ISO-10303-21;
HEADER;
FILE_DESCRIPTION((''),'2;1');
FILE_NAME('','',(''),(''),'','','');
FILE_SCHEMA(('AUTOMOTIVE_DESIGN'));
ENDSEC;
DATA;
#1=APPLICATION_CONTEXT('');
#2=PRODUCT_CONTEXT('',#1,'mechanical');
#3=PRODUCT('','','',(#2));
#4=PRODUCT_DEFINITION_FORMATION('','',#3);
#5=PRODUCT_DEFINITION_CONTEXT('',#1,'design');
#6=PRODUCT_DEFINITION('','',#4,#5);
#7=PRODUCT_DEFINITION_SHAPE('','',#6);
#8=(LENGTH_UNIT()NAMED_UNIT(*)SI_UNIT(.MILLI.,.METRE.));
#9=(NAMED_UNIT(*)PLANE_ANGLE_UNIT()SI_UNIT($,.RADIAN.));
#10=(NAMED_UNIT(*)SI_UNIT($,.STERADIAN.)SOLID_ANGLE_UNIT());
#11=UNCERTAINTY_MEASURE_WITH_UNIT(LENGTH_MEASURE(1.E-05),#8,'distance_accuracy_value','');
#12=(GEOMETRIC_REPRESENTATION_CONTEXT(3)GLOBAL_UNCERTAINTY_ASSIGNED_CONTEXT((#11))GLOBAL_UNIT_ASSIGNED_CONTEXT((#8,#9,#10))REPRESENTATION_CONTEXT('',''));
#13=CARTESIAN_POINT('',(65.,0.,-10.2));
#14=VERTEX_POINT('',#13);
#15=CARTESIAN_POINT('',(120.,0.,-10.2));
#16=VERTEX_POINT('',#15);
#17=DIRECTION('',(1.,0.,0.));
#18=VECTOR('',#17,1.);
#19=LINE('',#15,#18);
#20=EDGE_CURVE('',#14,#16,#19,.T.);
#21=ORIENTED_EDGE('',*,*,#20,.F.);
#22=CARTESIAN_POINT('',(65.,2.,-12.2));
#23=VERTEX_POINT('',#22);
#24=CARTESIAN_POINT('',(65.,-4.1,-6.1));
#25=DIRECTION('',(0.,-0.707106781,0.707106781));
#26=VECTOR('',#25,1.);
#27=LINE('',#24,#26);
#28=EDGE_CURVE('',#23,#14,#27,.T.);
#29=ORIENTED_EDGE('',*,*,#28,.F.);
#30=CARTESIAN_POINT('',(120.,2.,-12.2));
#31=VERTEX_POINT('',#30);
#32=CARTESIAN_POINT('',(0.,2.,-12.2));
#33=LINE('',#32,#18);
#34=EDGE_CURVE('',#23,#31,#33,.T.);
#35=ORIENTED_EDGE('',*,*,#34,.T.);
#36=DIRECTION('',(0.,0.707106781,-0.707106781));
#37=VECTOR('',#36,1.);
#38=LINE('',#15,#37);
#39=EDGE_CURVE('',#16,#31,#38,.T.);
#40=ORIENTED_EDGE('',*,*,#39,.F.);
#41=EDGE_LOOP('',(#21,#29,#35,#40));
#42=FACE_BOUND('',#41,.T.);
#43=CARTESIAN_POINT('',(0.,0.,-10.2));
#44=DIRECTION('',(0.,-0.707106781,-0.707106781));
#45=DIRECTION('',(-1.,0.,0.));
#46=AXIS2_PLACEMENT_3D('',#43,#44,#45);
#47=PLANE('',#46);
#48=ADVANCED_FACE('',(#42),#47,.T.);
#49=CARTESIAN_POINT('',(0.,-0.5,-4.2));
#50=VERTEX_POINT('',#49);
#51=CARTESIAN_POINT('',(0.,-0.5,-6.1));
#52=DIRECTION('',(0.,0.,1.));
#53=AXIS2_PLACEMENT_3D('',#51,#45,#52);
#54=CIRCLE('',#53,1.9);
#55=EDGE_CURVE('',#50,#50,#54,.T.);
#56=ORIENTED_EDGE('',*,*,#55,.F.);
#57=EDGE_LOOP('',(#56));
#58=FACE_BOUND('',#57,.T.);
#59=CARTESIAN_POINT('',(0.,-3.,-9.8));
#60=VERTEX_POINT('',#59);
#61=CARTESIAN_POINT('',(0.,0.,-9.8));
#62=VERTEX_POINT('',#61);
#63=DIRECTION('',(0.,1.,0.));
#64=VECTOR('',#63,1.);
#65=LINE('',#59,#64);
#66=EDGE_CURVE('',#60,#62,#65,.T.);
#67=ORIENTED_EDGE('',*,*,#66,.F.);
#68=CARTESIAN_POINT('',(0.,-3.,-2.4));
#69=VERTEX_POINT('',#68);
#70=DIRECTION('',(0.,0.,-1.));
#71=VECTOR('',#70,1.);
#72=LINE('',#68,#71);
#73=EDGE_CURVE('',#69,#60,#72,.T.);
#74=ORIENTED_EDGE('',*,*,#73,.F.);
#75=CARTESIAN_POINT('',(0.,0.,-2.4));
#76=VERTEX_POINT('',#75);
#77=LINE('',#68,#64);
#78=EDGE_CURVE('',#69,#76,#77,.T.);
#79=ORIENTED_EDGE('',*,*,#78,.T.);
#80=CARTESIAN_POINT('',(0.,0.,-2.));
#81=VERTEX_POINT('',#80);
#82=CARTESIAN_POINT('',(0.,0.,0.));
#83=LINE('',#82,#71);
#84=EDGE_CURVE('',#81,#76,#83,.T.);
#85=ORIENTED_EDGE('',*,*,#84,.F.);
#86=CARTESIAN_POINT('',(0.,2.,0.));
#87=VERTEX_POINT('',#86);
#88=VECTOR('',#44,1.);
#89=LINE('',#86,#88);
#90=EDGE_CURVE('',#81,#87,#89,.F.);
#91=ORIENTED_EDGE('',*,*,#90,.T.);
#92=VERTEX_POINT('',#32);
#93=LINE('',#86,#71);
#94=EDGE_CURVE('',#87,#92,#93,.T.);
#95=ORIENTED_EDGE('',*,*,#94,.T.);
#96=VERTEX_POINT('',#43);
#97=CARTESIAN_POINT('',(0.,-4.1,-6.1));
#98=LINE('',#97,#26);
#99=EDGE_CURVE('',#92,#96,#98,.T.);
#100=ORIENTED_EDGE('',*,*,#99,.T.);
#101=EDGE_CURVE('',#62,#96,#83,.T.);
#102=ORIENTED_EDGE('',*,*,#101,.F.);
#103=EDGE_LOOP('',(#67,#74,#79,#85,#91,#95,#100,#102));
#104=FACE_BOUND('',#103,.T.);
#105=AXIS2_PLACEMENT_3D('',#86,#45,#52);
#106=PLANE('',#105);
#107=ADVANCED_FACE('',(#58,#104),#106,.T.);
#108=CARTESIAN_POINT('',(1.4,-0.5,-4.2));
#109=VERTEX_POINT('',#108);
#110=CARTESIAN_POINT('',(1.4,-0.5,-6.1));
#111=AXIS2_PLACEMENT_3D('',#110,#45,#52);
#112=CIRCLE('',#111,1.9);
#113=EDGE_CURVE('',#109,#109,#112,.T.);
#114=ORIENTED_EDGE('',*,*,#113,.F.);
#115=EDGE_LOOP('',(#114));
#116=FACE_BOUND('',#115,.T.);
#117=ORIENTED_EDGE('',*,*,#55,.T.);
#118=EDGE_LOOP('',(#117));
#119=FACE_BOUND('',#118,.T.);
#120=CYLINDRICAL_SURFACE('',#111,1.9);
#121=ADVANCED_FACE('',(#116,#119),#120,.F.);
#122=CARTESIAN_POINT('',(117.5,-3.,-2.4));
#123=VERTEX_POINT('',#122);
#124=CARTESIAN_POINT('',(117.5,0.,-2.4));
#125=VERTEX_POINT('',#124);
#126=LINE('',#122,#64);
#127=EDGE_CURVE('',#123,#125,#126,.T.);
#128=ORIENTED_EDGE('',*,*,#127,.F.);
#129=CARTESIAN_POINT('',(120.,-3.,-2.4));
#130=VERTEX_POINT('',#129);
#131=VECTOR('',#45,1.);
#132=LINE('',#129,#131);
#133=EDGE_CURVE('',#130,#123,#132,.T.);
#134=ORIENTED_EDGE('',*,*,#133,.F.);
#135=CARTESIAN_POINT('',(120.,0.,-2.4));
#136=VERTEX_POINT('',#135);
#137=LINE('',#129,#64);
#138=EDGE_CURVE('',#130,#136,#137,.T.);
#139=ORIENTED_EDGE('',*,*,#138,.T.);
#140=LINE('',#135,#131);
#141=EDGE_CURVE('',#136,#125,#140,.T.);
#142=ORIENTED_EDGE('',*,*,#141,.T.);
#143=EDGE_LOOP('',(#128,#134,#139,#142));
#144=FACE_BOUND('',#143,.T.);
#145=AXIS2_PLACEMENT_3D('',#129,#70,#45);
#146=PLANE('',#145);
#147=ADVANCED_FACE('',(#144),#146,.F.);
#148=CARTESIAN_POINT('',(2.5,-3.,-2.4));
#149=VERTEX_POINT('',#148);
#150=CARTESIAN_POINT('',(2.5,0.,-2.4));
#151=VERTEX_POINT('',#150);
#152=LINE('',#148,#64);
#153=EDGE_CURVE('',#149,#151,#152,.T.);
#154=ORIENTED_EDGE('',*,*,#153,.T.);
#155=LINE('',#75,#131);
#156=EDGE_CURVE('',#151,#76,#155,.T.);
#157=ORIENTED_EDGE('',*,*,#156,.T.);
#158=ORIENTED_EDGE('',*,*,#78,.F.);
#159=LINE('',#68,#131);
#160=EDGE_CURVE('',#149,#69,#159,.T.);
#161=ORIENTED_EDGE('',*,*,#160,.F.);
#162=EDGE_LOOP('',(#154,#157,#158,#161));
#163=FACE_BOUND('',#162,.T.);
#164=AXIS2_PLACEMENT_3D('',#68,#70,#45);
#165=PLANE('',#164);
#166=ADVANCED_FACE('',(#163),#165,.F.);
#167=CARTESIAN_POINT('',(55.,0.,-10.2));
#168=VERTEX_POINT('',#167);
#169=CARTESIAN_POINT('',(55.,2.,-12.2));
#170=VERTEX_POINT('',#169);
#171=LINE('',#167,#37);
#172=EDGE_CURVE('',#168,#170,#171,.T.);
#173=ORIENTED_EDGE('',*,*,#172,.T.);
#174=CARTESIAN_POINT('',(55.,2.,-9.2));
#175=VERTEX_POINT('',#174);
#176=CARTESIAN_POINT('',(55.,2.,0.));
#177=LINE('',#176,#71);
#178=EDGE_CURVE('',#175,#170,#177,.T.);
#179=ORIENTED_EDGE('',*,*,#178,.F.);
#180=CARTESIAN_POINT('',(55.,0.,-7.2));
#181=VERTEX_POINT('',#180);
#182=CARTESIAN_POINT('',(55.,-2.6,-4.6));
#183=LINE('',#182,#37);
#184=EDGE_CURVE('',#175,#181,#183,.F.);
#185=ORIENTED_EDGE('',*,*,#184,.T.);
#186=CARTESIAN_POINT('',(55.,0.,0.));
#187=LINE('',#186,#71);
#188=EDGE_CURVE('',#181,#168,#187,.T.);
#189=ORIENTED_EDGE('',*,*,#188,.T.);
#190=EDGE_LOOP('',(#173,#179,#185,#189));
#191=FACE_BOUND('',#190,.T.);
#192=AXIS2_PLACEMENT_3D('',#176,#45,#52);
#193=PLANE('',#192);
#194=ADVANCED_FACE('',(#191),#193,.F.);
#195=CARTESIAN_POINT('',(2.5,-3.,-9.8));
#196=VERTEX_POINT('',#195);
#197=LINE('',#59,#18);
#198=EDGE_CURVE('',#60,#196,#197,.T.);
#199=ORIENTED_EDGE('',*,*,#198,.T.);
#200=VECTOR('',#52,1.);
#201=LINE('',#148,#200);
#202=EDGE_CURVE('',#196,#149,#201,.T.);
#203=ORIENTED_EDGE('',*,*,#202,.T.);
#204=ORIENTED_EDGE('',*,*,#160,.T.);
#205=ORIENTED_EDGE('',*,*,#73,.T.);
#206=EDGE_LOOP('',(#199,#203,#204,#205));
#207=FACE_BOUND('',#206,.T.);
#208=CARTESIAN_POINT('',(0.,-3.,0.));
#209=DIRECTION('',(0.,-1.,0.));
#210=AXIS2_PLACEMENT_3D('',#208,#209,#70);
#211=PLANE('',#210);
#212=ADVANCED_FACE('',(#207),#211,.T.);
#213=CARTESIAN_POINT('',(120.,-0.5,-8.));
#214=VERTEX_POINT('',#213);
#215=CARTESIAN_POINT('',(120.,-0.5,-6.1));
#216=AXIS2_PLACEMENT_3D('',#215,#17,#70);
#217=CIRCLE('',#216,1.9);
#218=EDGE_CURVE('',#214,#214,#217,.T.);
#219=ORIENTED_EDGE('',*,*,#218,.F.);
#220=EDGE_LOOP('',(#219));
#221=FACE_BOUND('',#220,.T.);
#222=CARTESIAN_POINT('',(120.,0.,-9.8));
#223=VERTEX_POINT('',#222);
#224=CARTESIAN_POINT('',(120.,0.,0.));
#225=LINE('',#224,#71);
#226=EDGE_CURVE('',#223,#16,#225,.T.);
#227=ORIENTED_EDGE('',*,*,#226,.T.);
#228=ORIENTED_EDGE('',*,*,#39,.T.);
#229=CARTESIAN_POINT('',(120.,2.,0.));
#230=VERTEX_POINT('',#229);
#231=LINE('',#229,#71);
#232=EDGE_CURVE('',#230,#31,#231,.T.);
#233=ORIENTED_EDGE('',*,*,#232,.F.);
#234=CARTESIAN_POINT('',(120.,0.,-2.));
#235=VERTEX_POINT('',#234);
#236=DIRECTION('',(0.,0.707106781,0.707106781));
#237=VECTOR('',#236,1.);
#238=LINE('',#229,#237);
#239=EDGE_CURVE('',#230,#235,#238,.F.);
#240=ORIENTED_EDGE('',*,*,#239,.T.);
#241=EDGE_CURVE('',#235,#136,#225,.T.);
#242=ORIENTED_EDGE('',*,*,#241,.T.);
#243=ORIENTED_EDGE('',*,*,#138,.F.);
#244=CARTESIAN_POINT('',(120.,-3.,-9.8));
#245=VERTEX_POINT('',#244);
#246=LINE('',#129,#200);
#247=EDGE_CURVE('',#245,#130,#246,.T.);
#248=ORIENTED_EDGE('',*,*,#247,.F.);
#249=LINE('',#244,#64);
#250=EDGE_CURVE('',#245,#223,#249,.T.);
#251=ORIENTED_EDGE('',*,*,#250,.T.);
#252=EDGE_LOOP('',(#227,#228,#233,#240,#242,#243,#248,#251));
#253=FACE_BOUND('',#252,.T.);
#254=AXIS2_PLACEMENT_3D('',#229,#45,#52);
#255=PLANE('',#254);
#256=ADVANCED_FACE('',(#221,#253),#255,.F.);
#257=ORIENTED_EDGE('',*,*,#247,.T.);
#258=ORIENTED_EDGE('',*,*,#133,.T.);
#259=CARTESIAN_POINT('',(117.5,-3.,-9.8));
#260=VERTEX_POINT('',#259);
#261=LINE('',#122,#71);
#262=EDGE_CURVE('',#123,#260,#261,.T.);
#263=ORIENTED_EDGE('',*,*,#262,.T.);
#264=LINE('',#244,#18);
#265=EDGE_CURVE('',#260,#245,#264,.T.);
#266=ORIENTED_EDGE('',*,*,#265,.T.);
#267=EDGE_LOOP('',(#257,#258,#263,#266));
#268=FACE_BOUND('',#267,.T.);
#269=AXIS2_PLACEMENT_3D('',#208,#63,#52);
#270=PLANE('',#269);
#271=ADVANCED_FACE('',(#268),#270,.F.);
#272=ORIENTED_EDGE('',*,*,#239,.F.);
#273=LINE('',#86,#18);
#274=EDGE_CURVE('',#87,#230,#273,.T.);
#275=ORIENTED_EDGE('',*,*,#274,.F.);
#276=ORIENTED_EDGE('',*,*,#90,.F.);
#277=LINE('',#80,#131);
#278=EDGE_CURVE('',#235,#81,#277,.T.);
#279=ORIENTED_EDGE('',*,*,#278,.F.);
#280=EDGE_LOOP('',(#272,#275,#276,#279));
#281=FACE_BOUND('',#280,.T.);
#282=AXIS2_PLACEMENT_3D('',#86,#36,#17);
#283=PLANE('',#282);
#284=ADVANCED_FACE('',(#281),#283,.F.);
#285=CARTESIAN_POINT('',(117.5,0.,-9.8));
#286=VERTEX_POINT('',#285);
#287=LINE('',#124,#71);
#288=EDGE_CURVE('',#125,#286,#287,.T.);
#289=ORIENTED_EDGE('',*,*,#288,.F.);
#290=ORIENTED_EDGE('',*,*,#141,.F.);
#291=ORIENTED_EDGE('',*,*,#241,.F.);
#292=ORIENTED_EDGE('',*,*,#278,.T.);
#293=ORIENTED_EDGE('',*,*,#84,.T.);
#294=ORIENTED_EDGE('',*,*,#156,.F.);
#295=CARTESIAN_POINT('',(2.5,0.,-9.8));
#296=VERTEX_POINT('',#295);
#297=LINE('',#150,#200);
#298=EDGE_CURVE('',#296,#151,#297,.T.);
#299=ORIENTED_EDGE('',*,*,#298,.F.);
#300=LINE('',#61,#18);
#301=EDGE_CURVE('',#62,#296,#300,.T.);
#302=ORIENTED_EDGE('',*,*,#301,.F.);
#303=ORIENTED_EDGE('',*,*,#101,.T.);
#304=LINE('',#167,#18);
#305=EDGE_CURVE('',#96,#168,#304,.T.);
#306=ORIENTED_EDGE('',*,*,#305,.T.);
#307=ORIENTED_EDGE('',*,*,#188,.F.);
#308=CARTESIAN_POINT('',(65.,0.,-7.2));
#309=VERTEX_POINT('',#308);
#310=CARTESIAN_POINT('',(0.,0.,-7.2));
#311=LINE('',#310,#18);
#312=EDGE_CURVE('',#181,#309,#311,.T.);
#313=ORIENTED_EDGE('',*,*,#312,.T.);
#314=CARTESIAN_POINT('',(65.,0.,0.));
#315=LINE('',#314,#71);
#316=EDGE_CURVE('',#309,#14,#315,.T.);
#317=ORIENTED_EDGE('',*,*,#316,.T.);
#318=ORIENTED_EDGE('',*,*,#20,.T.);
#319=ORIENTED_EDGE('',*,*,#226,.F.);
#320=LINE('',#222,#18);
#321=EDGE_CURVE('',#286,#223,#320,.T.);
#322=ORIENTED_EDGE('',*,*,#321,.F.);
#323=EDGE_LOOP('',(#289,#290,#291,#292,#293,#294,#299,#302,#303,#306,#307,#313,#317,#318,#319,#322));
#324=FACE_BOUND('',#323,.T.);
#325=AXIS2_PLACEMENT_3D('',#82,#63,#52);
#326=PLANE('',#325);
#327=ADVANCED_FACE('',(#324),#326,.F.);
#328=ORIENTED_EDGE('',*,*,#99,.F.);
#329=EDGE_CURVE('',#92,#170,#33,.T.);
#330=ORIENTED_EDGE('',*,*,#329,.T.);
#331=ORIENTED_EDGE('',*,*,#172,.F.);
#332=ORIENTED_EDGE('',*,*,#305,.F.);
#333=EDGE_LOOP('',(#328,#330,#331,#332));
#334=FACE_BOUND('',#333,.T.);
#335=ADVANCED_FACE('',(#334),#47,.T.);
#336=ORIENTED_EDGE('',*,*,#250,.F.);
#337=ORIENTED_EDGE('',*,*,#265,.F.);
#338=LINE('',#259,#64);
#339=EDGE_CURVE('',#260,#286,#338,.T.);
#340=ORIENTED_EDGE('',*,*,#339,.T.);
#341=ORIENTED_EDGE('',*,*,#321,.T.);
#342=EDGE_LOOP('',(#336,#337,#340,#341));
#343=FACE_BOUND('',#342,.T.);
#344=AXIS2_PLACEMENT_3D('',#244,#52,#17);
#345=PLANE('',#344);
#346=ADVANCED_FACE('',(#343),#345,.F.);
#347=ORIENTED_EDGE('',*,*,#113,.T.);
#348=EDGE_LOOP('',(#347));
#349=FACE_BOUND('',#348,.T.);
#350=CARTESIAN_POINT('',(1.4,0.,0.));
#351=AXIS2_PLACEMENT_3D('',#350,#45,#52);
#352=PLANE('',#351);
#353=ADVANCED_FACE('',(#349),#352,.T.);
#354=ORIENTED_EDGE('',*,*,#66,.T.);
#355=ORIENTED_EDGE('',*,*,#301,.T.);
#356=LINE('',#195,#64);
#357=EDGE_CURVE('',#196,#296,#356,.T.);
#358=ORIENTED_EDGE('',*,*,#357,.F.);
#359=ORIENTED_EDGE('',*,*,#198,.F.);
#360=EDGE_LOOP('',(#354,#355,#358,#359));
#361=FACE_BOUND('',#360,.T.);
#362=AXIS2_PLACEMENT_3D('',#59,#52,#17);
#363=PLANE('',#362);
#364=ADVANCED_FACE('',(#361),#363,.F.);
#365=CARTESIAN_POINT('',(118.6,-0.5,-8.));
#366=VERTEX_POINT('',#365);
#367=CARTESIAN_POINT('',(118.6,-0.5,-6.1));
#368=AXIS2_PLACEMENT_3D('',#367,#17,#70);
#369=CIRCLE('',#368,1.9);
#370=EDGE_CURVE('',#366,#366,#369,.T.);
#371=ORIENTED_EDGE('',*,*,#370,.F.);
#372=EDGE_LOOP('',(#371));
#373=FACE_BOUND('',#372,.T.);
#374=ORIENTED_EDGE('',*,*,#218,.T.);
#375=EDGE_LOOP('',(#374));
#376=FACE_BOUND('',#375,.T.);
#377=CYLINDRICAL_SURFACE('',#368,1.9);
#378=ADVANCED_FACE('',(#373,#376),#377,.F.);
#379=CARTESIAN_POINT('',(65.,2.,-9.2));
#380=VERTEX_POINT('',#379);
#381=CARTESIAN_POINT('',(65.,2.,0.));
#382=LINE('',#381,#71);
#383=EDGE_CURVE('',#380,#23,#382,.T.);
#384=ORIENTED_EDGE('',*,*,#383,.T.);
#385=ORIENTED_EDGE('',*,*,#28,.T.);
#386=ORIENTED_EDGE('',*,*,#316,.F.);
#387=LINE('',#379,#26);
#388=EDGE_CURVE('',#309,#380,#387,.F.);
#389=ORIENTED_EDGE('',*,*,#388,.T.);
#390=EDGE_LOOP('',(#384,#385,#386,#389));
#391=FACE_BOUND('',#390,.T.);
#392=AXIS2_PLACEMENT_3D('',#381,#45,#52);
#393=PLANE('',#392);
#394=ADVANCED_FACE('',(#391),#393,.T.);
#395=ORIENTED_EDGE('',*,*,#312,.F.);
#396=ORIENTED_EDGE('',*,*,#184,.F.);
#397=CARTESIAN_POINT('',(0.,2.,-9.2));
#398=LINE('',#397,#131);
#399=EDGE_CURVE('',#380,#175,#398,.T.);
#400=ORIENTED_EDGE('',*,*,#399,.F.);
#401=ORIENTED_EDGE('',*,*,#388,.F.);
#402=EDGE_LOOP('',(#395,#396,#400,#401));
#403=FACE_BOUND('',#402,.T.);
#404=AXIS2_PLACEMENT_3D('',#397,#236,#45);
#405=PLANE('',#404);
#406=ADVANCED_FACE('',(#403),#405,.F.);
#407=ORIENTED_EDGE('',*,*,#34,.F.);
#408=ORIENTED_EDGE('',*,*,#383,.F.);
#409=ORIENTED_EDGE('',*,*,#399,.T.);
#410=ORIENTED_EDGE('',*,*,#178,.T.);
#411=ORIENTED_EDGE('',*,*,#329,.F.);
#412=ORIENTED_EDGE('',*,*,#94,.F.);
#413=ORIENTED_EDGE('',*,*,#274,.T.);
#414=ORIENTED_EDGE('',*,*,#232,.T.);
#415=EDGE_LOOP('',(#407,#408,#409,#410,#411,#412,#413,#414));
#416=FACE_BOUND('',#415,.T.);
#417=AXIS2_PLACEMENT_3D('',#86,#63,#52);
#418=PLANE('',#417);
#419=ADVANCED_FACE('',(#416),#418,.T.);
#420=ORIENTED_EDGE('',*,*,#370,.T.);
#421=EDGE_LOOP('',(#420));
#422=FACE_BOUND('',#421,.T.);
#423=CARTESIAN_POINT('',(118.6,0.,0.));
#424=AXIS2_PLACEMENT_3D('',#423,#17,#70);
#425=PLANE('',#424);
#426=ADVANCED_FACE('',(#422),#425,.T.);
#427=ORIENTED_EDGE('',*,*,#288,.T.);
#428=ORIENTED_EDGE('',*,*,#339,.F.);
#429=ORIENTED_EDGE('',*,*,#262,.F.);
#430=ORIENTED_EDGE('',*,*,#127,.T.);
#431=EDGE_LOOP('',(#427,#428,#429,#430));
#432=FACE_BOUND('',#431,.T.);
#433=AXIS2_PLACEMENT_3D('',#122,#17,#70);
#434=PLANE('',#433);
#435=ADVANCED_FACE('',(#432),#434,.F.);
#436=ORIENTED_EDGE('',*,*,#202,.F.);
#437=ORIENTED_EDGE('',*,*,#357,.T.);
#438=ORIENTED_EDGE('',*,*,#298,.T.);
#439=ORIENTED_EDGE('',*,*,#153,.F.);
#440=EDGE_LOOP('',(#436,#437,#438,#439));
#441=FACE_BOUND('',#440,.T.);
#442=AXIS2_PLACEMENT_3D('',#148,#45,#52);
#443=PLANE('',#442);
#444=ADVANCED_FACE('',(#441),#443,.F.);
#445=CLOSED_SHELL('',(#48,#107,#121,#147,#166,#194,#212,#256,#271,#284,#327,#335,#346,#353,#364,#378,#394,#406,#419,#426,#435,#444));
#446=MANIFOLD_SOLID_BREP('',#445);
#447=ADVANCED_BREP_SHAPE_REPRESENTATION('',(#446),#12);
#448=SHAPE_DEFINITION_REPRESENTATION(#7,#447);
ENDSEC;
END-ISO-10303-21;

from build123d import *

# Parameters (mm, degrees)
BOSS_EXTRU_2_DEPTH      = 2
CHANFREIN2_SIZE         = 2
ESQUISSE6_W             = 2.5
ESQUISSE6_H             = 7.4
BOSS_EXTRU_5_DEPTH      = 3
ENL_V_MAT_EXTRU_5_DEPTH = 1.4
ENL_V_START             = -1.4
ENL_V_MAT_EXTRU_6_DEPTH = 1.4


with BuildPart() as part:
    # Esquisse1 → Boss.-Extru.2 (new body)
    with BuildSketch(Plane(origin=(0, 0, 0), x_dir=(1, 0, 0), z_dir=(0, 1, 0))):
        Polygon((0, 12.2), (0, 0), (120, 0), (120, 12.2), (65, 12.2), (65, 9.2), (55, 9.2), (55, 12.2), align=None)
    extrude(amount=BOSS_EXTRU_2_DEPTH)

    # Chanfrein2
    chanfrein2_edges = [part.edges().sort_by_distance(p)[0] for p in [
        (92.5, 0, -12.2),
        (27.5, 0, -12.2),
        (60, 0, -9.2),
        (60, 0, 0),
    ]]
    chamfer(chanfrein2_edges, length=CHANFREIN2_SIZE - 0.0001)  # a hair under: the kernel refuses the full size

    # Esquisse6 → Boss.-Extru.5 (add)
    with BuildSketch(Plane.XZ):
        with Locations((1.25, -6.1)):
            Rectangle(ESQUISSE6_W, ESQUISSE6_H)
        with Locations((118.75, -6.1)):
            Rectangle(ESQUISSE6_W, ESQUISSE6_H)
    extrude(amount=BOSS_EXTRU_5_DEPTH)

    # Esquisse9 → Enlèv. mat.-Extru.5 (cut)
    with BuildSketch(Plane.ZY):
        with BuildLine():
            ThreePointArc((-4.2, -0.5), (-4.235817666, -0.132815816), (-4.341920237, 0.220524493))
            Line((-4.341920237, 0.220524493), (-7.858079763, -1.220524493))
            ThreePointArc((-7.858079763, -1.220524493), (-5.732815816, -2.364182334), (-4.2, -0.5))
        make_face()
        with BuildLine():
            Line((-7.858079763, -1.220524493), (-4.341920237, 0.220524493))
            ThreePointArc((-4.341920237, 0.220524493), (-6.820524493, 1.258079763), (-7.858079763, -1.220524493))
        make_face()
    extrude(amount=-ENL_V_MAT_EXTRU_5_DEPTH, mode=Mode.SUBTRACT)

    # Esquisse10 → Enlèv. mat.-Extru.6 (cut)
    with BuildSketch(Plane(origin=(120, 0, 0), x_dir=(0, 0, -1), z_dir=(1, 0, 0)).offset(ENL_V_START)):
        with BuildLine():
            ThreePointArc((8, -0.5), (7.964182334, -0.132815816), (7.858079763, 0.220524493))
            Line((7.858079763, 0.220524493), (4.341920237, -1.220524493))
            ThreePointArc((4.341920237, -1.220524493), (6.467184184, -2.364182334), (8, -0.5))
        make_face()
        with BuildLine():
            Line((4.341920237, -1.220524493), (7.858079763, 0.220524493))
            ThreePointArc((7.858079763, 0.220524493), (5.379475507, 1.258079763), (4.341920237, -1.220524493))
        make_face()
    extrude(amount=ENL_V_MAT_EXTRU_6_DEPTH, mode=Mode.SUBTRACT)


solid = part.part
